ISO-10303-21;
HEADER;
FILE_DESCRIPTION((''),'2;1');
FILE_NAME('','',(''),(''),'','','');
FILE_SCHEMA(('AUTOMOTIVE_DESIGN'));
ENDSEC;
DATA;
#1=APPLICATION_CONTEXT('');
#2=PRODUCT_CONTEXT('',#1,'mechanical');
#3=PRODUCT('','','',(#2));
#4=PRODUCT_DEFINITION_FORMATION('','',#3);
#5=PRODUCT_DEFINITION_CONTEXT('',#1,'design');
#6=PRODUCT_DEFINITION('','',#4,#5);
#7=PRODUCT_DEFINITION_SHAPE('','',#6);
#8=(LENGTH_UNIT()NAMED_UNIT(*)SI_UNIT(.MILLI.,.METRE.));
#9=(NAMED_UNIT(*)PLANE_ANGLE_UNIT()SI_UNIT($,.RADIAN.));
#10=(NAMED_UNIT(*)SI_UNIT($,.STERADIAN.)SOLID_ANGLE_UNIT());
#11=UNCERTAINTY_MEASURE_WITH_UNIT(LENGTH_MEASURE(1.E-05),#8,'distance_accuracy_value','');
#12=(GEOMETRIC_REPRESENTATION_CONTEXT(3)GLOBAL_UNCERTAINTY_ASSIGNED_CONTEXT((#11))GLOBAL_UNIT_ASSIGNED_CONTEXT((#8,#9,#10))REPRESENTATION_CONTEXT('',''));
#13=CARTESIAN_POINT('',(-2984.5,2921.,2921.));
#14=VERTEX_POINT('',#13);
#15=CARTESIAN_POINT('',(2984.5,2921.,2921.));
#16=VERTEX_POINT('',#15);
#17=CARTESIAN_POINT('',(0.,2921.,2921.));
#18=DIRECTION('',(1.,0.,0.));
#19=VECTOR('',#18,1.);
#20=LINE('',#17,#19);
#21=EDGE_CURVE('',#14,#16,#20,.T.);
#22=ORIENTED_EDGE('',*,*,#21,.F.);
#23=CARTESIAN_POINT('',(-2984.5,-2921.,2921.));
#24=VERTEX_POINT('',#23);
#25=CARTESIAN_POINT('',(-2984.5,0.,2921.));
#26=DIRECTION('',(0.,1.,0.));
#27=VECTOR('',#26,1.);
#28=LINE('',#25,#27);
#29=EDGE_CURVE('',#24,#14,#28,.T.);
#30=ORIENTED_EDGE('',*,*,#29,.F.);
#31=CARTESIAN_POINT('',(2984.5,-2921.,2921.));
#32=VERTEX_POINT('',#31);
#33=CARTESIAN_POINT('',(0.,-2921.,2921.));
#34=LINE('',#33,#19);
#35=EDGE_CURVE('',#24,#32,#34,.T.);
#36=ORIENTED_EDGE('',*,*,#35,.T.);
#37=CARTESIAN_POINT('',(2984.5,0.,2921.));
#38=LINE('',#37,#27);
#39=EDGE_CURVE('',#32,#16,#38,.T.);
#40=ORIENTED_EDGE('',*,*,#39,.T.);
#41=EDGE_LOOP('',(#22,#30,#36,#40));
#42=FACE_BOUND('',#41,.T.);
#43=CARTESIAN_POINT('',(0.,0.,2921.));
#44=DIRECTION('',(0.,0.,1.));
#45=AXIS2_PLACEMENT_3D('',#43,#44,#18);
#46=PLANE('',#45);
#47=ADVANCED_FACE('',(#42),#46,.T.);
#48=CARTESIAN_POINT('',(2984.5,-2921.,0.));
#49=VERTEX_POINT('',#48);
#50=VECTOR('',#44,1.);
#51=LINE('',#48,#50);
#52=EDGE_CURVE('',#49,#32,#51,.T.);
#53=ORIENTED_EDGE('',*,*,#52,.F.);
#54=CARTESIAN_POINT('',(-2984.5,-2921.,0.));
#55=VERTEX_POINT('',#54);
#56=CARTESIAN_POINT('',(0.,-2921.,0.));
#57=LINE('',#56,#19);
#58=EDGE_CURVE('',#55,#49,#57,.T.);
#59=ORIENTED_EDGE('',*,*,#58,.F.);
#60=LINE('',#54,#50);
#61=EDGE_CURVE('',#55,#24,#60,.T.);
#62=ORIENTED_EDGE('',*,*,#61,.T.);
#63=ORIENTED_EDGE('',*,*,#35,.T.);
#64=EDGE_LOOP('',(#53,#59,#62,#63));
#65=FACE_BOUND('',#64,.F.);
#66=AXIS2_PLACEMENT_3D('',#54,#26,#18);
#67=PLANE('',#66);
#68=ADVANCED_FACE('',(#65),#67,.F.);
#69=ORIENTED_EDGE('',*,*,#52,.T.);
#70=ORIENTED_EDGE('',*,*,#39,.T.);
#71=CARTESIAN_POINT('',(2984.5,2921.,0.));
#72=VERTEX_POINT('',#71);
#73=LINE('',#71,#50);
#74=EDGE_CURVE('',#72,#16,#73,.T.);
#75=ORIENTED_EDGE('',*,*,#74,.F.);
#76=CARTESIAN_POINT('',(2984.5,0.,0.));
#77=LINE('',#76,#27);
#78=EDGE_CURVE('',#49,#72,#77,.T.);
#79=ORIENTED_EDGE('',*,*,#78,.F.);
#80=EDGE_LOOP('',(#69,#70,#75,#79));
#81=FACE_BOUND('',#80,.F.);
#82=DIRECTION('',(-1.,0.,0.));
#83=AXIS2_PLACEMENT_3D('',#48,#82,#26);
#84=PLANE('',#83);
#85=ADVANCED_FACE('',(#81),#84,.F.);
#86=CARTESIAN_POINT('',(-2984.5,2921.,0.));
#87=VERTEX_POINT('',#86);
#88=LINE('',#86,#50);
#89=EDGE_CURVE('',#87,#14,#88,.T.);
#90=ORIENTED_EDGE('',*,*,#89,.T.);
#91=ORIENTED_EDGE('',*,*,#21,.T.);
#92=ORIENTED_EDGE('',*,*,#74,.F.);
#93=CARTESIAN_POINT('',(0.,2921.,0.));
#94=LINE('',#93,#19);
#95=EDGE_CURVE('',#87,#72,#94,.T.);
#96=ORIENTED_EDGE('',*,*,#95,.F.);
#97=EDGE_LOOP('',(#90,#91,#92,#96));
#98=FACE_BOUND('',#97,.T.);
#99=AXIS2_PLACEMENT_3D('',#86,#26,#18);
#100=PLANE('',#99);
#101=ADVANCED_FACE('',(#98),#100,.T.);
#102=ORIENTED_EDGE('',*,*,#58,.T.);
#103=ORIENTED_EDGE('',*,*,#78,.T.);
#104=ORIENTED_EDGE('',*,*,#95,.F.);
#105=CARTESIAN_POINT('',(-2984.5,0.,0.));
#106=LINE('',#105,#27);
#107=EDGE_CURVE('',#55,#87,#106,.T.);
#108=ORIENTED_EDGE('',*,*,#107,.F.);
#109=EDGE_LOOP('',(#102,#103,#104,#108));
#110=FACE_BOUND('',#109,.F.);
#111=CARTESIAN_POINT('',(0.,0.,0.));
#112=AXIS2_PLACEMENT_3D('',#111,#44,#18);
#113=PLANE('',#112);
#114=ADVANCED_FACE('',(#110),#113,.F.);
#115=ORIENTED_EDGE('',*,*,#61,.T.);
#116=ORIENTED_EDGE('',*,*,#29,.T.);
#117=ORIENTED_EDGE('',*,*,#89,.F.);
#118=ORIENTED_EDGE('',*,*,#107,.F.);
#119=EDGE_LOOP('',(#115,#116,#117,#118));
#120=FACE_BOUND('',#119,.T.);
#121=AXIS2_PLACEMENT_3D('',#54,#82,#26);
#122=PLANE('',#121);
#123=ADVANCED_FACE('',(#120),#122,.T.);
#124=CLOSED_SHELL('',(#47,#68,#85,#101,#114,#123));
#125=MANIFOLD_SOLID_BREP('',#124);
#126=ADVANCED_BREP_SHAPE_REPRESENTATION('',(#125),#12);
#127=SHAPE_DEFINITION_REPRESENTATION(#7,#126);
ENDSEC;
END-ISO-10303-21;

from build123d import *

# Parameters (mm, degrees)
F1_W     = 5969
F1_H     = 5842
F2_DEPTH = 2921


# Not quite as in the source:
# - a variable given as a bare number and used for a length is read in inches; the dataset says mm whatever the document's units were


with BuildPart() as f2:
    # F1 (on Top) → F2 (new body)
    with BuildSketch(Plane.XY):
        Rectangle(F1_W, F1_H)
    extrude(amount=F2_DEPTH)


solid = f2.part
